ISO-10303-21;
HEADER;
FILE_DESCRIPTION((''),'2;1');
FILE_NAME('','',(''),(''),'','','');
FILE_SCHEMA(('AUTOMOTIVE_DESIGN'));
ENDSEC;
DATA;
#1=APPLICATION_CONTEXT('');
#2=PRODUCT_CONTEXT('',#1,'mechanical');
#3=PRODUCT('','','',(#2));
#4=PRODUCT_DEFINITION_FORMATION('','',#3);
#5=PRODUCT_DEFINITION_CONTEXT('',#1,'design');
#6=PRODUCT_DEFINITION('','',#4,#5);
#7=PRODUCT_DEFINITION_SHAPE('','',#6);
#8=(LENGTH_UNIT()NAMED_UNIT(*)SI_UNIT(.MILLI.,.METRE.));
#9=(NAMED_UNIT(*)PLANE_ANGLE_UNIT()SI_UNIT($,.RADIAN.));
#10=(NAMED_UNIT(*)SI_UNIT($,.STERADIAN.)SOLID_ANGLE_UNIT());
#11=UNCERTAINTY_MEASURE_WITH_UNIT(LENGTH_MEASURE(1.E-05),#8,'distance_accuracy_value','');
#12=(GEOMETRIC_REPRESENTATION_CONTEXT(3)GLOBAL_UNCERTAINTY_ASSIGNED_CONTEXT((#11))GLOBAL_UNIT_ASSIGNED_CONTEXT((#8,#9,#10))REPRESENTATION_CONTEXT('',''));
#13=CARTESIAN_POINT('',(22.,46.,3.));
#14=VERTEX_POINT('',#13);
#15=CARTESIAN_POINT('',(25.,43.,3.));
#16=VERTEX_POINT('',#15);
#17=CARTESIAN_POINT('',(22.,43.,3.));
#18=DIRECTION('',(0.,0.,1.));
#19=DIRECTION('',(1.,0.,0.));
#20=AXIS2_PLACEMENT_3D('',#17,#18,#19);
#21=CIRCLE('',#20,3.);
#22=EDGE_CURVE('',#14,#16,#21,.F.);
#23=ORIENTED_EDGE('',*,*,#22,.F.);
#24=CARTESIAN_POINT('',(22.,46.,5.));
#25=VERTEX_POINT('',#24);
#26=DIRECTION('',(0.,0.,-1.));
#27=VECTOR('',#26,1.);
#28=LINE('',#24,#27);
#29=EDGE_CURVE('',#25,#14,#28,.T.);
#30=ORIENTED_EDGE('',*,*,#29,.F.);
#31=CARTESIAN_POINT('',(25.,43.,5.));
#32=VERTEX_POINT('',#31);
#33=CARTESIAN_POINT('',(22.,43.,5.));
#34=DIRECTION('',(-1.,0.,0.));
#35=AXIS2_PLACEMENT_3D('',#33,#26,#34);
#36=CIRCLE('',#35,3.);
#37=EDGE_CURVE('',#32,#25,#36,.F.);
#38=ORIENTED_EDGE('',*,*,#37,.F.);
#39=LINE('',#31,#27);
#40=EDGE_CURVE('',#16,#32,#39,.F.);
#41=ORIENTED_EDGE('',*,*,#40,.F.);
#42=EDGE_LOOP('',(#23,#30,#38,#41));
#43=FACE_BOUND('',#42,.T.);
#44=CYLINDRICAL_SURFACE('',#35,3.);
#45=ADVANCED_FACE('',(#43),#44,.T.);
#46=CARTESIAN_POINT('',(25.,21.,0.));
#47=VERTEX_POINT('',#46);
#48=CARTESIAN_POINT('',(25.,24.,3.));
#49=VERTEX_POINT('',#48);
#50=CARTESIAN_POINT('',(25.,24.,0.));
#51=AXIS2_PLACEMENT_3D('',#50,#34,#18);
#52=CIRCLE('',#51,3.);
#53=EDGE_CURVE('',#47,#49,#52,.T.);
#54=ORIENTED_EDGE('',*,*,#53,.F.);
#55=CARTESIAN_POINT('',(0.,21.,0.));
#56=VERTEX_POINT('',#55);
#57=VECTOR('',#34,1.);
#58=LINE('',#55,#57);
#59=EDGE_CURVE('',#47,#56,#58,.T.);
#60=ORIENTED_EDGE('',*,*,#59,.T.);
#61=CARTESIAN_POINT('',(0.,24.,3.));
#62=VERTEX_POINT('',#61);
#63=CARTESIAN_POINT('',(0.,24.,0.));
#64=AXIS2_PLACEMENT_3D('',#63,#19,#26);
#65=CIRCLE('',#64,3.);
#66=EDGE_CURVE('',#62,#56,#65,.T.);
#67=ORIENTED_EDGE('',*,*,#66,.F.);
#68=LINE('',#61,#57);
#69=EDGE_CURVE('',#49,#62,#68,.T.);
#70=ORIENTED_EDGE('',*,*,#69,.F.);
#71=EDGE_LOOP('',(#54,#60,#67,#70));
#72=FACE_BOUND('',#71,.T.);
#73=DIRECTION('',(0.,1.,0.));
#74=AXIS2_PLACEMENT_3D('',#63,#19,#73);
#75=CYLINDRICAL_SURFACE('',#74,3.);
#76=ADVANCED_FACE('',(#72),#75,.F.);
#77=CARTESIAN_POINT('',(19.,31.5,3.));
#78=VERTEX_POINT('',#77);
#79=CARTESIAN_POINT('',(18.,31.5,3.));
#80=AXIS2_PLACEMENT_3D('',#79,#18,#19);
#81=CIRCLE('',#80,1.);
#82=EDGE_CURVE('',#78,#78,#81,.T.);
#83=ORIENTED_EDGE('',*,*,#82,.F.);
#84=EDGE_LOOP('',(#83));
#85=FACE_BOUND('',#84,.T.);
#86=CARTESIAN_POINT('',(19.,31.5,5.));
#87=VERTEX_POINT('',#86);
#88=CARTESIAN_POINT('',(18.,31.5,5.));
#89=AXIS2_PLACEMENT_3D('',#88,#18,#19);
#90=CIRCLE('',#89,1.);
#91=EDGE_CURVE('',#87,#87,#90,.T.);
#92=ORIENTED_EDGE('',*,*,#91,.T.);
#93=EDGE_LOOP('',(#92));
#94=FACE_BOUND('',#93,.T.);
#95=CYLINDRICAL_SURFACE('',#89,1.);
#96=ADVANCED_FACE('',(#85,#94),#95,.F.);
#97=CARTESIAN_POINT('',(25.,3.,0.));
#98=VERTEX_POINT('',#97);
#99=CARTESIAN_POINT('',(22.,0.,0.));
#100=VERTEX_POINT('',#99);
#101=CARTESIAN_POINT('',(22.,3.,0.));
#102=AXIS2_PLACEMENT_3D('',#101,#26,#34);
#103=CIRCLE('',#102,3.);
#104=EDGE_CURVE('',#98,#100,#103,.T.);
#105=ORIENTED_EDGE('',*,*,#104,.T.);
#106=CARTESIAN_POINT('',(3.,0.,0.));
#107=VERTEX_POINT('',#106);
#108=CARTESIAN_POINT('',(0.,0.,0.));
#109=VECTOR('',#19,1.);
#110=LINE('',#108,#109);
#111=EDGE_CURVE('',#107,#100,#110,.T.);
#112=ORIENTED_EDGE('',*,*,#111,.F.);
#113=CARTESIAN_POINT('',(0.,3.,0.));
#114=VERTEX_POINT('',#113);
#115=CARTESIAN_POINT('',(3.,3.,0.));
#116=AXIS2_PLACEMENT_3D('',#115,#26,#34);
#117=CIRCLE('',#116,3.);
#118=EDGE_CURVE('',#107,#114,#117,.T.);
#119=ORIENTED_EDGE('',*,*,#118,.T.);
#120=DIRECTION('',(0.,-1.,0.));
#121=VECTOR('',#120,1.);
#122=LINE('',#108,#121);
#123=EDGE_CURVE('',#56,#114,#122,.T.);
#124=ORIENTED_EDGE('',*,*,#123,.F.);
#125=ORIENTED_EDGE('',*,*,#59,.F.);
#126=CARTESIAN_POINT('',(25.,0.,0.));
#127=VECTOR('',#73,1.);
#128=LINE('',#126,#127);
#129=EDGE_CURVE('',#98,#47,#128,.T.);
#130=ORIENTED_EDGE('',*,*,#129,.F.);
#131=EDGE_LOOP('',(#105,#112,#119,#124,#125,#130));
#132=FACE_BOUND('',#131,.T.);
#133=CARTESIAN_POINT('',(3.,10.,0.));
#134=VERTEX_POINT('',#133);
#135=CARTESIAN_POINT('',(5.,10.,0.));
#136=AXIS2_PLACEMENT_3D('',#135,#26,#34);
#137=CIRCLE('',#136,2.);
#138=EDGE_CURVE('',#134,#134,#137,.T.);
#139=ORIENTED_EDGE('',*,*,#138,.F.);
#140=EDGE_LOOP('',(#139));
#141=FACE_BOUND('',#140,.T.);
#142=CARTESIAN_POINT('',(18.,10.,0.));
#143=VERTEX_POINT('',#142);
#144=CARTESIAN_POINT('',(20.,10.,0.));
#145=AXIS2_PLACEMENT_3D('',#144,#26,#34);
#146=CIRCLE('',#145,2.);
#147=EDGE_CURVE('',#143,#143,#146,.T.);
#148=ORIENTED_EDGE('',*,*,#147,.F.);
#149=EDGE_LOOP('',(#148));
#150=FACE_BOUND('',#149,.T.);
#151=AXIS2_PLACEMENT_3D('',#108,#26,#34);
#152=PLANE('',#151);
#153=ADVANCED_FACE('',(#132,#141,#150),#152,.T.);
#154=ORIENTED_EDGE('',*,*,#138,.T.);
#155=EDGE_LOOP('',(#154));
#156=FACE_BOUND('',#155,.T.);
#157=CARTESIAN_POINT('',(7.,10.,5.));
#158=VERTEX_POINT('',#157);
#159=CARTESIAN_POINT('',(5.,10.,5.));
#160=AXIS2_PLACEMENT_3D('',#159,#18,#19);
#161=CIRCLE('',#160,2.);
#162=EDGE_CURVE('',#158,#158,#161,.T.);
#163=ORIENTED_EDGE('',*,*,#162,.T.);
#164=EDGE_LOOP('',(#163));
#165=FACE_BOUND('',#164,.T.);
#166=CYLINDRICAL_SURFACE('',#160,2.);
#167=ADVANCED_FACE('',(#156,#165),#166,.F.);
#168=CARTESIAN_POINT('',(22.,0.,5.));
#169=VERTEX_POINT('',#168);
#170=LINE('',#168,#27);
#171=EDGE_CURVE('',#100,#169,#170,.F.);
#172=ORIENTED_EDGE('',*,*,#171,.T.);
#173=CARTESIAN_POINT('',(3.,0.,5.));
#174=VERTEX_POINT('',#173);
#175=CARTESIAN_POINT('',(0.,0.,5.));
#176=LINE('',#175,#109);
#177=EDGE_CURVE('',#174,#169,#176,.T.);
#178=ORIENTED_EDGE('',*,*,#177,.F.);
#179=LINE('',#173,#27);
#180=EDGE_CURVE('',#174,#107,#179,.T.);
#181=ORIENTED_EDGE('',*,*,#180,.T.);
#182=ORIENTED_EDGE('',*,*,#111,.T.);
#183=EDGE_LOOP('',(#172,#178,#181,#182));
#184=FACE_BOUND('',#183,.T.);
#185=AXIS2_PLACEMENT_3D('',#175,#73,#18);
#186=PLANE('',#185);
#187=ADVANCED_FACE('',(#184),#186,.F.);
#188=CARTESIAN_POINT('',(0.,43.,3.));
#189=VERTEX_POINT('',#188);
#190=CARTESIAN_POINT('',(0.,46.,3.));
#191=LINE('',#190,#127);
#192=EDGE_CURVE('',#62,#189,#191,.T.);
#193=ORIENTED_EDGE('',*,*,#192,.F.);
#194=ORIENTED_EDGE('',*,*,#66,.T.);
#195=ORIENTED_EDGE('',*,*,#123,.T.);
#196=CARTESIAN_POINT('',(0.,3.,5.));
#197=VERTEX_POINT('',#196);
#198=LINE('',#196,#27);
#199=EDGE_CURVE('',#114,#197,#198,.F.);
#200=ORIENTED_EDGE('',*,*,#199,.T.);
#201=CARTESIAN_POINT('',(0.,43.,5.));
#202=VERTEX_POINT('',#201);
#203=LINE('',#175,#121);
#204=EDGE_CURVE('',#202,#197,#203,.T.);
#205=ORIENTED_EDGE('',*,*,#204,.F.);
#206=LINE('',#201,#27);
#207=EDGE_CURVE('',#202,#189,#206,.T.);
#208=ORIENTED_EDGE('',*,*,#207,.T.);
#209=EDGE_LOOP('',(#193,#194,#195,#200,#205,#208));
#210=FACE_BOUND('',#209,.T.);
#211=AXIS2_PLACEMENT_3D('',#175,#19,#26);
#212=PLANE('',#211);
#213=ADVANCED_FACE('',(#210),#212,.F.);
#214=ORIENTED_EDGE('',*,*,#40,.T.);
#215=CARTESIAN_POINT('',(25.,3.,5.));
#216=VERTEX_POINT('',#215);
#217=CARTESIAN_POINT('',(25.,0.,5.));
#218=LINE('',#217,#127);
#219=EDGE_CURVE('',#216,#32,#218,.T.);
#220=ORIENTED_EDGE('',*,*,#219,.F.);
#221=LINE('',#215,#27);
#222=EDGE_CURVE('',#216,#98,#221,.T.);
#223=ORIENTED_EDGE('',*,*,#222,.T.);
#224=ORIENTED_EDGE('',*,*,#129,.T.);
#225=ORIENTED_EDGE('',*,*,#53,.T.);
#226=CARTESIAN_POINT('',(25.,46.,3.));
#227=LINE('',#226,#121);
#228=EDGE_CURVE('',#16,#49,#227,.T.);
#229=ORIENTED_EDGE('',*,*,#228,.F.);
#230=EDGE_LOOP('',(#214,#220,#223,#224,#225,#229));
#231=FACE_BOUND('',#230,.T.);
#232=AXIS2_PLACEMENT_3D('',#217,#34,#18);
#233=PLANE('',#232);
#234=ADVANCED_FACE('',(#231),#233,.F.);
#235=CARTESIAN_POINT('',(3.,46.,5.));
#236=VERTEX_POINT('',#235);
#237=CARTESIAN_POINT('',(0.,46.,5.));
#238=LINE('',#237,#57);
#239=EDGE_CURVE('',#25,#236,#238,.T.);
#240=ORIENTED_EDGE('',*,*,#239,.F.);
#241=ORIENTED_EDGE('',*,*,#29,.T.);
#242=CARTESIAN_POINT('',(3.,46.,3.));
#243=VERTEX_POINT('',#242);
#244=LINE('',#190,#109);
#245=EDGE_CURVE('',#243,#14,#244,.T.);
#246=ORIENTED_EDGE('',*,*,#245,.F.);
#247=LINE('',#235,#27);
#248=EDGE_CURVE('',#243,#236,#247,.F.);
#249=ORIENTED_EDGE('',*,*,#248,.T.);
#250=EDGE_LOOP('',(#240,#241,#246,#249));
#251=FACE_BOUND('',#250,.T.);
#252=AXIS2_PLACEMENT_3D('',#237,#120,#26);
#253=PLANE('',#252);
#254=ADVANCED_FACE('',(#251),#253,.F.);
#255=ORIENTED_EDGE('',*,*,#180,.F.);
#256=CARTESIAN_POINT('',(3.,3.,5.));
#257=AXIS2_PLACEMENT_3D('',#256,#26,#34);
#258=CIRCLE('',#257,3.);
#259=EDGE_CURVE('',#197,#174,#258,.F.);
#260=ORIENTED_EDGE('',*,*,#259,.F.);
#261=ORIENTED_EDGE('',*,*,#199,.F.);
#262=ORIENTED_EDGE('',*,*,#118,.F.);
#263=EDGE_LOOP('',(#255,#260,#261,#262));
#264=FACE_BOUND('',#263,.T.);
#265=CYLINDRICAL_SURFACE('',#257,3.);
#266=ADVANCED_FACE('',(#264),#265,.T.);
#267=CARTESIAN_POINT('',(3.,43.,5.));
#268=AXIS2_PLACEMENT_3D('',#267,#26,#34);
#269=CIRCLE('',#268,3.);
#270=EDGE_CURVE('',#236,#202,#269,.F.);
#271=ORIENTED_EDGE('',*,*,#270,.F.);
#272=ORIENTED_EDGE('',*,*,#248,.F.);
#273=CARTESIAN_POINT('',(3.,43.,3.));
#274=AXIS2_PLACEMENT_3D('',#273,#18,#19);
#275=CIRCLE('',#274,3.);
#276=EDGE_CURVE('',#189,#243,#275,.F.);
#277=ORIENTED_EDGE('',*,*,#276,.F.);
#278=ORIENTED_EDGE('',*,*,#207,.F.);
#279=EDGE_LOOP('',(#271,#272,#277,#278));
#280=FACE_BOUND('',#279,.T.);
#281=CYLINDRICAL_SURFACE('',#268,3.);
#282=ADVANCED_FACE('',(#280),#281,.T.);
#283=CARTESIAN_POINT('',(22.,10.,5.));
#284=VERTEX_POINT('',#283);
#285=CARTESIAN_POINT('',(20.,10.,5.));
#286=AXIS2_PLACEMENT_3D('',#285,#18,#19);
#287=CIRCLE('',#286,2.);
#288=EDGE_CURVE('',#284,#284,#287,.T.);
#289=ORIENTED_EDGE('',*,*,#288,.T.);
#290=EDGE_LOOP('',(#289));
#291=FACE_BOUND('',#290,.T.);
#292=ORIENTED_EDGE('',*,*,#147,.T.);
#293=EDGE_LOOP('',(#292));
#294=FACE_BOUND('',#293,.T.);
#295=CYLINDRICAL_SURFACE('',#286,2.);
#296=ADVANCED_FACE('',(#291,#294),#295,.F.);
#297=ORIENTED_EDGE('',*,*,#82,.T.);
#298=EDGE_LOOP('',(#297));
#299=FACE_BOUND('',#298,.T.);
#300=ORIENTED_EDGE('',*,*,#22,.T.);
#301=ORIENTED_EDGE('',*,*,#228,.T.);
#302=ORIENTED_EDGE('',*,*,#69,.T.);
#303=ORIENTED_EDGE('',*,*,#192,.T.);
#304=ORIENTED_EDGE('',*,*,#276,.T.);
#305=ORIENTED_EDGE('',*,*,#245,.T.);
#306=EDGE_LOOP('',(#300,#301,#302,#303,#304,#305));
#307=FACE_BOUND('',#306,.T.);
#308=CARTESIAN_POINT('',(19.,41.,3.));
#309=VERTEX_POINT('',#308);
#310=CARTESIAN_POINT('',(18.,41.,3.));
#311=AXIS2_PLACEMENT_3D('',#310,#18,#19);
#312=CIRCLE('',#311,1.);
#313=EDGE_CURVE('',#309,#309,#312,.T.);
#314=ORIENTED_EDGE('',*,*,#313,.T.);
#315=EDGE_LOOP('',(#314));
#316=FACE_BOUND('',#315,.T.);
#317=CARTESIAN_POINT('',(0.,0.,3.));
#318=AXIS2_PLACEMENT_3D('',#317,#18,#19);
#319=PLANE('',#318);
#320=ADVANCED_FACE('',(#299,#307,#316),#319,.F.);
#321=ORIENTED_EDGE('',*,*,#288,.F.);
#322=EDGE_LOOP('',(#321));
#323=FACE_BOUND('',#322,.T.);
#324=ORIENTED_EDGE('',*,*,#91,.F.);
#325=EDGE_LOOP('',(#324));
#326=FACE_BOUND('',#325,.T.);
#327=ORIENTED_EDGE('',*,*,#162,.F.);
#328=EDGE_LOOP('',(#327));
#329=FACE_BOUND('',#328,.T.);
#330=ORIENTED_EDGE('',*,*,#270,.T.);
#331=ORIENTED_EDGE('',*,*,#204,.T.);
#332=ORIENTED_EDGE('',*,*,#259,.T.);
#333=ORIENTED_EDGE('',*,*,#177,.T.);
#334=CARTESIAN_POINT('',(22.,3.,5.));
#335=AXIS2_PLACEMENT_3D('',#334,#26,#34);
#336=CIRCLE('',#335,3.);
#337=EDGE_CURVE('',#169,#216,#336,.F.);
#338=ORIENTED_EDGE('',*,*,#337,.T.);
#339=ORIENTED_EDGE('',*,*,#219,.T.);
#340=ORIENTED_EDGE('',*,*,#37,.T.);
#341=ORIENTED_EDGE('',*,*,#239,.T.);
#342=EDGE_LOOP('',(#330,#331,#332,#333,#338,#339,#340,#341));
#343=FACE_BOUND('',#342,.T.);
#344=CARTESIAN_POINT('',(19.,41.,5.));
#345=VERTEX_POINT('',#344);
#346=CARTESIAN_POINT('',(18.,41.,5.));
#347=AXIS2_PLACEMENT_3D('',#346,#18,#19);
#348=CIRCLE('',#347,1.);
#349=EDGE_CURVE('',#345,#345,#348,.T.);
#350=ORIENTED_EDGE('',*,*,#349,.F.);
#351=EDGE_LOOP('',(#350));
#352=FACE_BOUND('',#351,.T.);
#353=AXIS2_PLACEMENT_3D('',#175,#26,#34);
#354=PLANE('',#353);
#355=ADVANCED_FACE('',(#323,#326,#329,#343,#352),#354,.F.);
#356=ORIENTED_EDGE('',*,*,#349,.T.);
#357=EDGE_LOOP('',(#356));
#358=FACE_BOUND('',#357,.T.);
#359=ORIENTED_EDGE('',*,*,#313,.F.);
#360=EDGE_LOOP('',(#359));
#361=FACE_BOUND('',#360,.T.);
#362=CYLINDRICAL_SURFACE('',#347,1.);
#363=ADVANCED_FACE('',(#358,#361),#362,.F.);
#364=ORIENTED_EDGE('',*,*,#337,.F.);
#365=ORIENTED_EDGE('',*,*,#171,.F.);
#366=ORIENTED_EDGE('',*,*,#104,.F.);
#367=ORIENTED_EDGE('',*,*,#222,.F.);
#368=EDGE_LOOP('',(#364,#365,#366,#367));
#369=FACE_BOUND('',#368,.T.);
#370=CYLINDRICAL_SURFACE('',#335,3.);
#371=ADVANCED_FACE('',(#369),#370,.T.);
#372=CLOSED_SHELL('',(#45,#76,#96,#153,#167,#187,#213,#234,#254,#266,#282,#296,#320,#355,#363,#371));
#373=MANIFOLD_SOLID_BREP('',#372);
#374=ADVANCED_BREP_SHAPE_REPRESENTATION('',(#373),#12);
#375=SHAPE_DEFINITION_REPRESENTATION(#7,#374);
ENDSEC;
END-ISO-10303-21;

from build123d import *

# Parameters (mm, degrees)
SKETCH_1_W          = 25
SKETCH_1_H          = 46
EXTRUDE_1_DEPTH     = 5
SKETCH_2_W          = 25
SKETCH_2_H          = 25
CUT_EXTRUDE_1_DEPTH = 3
M4X0_7_1_D          = 4
M2X0_4_1_D          = 2
FILLET_1_R          = 3
FILLET_2_R          = 3


with BuildPart() as part:
    # ｽｹｯﾁ1 → ﾎﾞｽ - 押し出し1 (new body)
    with BuildSketch(Plane.XY):
        with Locations((12.5, 23)):
            Rectangle(SKETCH_1_W, SKETCH_1_H)
    extrude(amount=EXTRUDE_1_DEPTH)

    # ｽｹｯﾁ2 → ｶｯﾄ - 押し出し1 (cut)
    with BuildSketch(Plane(origin=(0, 0, 0), x_dir=(-1, 0, 0), z_dir=(0, 0, -1))):
        with Locations((-12.5, 33.5)):
            Rectangle(SKETCH_2_W, SKETCH_2_H)
    extrude(amount=-CUT_EXTRUDE_1_DEPTH, mode=Mode.SUBTRACT)

    # M4x0.7 ねじ穴1 (through all)
    with Locations(Plane.XY.offset(5)):
        with Locations((5, 10), (20, 10)):
            Hole(M4X0_7_1_D / 2)

    # M2x0.4 ねじ穴1 (through all)
    with Locations(Plane.XY.offset(5)):
        with Locations((18, 41), (18, 31.5)):
            Hole(M2X0_4_1_D / 2)

    # ﾌｨﾚｯﾄ1
    fillet_1_edges = [part.edges().sort_by_distance(p)[0] for p in [
        (12.5, 21, 3),
    ]]
    fillet(fillet_1_edges, radius=FILLET_1_R - 0.0001)  # a hair under: the kernel refuses the full size

    # ﾌｨﾚｯﾄ2
    fillet_2_edges = [part.edges().sort_by_distance(p)[0] for p in [
        (0, 46, 4),
        (25, 46, 4),
        (25, 0, 2.5),
        (0, 0, 2.5),
    ]]
    fillet(fillet_2_edges, radius=FILLET_2_R)


solid = part.part
